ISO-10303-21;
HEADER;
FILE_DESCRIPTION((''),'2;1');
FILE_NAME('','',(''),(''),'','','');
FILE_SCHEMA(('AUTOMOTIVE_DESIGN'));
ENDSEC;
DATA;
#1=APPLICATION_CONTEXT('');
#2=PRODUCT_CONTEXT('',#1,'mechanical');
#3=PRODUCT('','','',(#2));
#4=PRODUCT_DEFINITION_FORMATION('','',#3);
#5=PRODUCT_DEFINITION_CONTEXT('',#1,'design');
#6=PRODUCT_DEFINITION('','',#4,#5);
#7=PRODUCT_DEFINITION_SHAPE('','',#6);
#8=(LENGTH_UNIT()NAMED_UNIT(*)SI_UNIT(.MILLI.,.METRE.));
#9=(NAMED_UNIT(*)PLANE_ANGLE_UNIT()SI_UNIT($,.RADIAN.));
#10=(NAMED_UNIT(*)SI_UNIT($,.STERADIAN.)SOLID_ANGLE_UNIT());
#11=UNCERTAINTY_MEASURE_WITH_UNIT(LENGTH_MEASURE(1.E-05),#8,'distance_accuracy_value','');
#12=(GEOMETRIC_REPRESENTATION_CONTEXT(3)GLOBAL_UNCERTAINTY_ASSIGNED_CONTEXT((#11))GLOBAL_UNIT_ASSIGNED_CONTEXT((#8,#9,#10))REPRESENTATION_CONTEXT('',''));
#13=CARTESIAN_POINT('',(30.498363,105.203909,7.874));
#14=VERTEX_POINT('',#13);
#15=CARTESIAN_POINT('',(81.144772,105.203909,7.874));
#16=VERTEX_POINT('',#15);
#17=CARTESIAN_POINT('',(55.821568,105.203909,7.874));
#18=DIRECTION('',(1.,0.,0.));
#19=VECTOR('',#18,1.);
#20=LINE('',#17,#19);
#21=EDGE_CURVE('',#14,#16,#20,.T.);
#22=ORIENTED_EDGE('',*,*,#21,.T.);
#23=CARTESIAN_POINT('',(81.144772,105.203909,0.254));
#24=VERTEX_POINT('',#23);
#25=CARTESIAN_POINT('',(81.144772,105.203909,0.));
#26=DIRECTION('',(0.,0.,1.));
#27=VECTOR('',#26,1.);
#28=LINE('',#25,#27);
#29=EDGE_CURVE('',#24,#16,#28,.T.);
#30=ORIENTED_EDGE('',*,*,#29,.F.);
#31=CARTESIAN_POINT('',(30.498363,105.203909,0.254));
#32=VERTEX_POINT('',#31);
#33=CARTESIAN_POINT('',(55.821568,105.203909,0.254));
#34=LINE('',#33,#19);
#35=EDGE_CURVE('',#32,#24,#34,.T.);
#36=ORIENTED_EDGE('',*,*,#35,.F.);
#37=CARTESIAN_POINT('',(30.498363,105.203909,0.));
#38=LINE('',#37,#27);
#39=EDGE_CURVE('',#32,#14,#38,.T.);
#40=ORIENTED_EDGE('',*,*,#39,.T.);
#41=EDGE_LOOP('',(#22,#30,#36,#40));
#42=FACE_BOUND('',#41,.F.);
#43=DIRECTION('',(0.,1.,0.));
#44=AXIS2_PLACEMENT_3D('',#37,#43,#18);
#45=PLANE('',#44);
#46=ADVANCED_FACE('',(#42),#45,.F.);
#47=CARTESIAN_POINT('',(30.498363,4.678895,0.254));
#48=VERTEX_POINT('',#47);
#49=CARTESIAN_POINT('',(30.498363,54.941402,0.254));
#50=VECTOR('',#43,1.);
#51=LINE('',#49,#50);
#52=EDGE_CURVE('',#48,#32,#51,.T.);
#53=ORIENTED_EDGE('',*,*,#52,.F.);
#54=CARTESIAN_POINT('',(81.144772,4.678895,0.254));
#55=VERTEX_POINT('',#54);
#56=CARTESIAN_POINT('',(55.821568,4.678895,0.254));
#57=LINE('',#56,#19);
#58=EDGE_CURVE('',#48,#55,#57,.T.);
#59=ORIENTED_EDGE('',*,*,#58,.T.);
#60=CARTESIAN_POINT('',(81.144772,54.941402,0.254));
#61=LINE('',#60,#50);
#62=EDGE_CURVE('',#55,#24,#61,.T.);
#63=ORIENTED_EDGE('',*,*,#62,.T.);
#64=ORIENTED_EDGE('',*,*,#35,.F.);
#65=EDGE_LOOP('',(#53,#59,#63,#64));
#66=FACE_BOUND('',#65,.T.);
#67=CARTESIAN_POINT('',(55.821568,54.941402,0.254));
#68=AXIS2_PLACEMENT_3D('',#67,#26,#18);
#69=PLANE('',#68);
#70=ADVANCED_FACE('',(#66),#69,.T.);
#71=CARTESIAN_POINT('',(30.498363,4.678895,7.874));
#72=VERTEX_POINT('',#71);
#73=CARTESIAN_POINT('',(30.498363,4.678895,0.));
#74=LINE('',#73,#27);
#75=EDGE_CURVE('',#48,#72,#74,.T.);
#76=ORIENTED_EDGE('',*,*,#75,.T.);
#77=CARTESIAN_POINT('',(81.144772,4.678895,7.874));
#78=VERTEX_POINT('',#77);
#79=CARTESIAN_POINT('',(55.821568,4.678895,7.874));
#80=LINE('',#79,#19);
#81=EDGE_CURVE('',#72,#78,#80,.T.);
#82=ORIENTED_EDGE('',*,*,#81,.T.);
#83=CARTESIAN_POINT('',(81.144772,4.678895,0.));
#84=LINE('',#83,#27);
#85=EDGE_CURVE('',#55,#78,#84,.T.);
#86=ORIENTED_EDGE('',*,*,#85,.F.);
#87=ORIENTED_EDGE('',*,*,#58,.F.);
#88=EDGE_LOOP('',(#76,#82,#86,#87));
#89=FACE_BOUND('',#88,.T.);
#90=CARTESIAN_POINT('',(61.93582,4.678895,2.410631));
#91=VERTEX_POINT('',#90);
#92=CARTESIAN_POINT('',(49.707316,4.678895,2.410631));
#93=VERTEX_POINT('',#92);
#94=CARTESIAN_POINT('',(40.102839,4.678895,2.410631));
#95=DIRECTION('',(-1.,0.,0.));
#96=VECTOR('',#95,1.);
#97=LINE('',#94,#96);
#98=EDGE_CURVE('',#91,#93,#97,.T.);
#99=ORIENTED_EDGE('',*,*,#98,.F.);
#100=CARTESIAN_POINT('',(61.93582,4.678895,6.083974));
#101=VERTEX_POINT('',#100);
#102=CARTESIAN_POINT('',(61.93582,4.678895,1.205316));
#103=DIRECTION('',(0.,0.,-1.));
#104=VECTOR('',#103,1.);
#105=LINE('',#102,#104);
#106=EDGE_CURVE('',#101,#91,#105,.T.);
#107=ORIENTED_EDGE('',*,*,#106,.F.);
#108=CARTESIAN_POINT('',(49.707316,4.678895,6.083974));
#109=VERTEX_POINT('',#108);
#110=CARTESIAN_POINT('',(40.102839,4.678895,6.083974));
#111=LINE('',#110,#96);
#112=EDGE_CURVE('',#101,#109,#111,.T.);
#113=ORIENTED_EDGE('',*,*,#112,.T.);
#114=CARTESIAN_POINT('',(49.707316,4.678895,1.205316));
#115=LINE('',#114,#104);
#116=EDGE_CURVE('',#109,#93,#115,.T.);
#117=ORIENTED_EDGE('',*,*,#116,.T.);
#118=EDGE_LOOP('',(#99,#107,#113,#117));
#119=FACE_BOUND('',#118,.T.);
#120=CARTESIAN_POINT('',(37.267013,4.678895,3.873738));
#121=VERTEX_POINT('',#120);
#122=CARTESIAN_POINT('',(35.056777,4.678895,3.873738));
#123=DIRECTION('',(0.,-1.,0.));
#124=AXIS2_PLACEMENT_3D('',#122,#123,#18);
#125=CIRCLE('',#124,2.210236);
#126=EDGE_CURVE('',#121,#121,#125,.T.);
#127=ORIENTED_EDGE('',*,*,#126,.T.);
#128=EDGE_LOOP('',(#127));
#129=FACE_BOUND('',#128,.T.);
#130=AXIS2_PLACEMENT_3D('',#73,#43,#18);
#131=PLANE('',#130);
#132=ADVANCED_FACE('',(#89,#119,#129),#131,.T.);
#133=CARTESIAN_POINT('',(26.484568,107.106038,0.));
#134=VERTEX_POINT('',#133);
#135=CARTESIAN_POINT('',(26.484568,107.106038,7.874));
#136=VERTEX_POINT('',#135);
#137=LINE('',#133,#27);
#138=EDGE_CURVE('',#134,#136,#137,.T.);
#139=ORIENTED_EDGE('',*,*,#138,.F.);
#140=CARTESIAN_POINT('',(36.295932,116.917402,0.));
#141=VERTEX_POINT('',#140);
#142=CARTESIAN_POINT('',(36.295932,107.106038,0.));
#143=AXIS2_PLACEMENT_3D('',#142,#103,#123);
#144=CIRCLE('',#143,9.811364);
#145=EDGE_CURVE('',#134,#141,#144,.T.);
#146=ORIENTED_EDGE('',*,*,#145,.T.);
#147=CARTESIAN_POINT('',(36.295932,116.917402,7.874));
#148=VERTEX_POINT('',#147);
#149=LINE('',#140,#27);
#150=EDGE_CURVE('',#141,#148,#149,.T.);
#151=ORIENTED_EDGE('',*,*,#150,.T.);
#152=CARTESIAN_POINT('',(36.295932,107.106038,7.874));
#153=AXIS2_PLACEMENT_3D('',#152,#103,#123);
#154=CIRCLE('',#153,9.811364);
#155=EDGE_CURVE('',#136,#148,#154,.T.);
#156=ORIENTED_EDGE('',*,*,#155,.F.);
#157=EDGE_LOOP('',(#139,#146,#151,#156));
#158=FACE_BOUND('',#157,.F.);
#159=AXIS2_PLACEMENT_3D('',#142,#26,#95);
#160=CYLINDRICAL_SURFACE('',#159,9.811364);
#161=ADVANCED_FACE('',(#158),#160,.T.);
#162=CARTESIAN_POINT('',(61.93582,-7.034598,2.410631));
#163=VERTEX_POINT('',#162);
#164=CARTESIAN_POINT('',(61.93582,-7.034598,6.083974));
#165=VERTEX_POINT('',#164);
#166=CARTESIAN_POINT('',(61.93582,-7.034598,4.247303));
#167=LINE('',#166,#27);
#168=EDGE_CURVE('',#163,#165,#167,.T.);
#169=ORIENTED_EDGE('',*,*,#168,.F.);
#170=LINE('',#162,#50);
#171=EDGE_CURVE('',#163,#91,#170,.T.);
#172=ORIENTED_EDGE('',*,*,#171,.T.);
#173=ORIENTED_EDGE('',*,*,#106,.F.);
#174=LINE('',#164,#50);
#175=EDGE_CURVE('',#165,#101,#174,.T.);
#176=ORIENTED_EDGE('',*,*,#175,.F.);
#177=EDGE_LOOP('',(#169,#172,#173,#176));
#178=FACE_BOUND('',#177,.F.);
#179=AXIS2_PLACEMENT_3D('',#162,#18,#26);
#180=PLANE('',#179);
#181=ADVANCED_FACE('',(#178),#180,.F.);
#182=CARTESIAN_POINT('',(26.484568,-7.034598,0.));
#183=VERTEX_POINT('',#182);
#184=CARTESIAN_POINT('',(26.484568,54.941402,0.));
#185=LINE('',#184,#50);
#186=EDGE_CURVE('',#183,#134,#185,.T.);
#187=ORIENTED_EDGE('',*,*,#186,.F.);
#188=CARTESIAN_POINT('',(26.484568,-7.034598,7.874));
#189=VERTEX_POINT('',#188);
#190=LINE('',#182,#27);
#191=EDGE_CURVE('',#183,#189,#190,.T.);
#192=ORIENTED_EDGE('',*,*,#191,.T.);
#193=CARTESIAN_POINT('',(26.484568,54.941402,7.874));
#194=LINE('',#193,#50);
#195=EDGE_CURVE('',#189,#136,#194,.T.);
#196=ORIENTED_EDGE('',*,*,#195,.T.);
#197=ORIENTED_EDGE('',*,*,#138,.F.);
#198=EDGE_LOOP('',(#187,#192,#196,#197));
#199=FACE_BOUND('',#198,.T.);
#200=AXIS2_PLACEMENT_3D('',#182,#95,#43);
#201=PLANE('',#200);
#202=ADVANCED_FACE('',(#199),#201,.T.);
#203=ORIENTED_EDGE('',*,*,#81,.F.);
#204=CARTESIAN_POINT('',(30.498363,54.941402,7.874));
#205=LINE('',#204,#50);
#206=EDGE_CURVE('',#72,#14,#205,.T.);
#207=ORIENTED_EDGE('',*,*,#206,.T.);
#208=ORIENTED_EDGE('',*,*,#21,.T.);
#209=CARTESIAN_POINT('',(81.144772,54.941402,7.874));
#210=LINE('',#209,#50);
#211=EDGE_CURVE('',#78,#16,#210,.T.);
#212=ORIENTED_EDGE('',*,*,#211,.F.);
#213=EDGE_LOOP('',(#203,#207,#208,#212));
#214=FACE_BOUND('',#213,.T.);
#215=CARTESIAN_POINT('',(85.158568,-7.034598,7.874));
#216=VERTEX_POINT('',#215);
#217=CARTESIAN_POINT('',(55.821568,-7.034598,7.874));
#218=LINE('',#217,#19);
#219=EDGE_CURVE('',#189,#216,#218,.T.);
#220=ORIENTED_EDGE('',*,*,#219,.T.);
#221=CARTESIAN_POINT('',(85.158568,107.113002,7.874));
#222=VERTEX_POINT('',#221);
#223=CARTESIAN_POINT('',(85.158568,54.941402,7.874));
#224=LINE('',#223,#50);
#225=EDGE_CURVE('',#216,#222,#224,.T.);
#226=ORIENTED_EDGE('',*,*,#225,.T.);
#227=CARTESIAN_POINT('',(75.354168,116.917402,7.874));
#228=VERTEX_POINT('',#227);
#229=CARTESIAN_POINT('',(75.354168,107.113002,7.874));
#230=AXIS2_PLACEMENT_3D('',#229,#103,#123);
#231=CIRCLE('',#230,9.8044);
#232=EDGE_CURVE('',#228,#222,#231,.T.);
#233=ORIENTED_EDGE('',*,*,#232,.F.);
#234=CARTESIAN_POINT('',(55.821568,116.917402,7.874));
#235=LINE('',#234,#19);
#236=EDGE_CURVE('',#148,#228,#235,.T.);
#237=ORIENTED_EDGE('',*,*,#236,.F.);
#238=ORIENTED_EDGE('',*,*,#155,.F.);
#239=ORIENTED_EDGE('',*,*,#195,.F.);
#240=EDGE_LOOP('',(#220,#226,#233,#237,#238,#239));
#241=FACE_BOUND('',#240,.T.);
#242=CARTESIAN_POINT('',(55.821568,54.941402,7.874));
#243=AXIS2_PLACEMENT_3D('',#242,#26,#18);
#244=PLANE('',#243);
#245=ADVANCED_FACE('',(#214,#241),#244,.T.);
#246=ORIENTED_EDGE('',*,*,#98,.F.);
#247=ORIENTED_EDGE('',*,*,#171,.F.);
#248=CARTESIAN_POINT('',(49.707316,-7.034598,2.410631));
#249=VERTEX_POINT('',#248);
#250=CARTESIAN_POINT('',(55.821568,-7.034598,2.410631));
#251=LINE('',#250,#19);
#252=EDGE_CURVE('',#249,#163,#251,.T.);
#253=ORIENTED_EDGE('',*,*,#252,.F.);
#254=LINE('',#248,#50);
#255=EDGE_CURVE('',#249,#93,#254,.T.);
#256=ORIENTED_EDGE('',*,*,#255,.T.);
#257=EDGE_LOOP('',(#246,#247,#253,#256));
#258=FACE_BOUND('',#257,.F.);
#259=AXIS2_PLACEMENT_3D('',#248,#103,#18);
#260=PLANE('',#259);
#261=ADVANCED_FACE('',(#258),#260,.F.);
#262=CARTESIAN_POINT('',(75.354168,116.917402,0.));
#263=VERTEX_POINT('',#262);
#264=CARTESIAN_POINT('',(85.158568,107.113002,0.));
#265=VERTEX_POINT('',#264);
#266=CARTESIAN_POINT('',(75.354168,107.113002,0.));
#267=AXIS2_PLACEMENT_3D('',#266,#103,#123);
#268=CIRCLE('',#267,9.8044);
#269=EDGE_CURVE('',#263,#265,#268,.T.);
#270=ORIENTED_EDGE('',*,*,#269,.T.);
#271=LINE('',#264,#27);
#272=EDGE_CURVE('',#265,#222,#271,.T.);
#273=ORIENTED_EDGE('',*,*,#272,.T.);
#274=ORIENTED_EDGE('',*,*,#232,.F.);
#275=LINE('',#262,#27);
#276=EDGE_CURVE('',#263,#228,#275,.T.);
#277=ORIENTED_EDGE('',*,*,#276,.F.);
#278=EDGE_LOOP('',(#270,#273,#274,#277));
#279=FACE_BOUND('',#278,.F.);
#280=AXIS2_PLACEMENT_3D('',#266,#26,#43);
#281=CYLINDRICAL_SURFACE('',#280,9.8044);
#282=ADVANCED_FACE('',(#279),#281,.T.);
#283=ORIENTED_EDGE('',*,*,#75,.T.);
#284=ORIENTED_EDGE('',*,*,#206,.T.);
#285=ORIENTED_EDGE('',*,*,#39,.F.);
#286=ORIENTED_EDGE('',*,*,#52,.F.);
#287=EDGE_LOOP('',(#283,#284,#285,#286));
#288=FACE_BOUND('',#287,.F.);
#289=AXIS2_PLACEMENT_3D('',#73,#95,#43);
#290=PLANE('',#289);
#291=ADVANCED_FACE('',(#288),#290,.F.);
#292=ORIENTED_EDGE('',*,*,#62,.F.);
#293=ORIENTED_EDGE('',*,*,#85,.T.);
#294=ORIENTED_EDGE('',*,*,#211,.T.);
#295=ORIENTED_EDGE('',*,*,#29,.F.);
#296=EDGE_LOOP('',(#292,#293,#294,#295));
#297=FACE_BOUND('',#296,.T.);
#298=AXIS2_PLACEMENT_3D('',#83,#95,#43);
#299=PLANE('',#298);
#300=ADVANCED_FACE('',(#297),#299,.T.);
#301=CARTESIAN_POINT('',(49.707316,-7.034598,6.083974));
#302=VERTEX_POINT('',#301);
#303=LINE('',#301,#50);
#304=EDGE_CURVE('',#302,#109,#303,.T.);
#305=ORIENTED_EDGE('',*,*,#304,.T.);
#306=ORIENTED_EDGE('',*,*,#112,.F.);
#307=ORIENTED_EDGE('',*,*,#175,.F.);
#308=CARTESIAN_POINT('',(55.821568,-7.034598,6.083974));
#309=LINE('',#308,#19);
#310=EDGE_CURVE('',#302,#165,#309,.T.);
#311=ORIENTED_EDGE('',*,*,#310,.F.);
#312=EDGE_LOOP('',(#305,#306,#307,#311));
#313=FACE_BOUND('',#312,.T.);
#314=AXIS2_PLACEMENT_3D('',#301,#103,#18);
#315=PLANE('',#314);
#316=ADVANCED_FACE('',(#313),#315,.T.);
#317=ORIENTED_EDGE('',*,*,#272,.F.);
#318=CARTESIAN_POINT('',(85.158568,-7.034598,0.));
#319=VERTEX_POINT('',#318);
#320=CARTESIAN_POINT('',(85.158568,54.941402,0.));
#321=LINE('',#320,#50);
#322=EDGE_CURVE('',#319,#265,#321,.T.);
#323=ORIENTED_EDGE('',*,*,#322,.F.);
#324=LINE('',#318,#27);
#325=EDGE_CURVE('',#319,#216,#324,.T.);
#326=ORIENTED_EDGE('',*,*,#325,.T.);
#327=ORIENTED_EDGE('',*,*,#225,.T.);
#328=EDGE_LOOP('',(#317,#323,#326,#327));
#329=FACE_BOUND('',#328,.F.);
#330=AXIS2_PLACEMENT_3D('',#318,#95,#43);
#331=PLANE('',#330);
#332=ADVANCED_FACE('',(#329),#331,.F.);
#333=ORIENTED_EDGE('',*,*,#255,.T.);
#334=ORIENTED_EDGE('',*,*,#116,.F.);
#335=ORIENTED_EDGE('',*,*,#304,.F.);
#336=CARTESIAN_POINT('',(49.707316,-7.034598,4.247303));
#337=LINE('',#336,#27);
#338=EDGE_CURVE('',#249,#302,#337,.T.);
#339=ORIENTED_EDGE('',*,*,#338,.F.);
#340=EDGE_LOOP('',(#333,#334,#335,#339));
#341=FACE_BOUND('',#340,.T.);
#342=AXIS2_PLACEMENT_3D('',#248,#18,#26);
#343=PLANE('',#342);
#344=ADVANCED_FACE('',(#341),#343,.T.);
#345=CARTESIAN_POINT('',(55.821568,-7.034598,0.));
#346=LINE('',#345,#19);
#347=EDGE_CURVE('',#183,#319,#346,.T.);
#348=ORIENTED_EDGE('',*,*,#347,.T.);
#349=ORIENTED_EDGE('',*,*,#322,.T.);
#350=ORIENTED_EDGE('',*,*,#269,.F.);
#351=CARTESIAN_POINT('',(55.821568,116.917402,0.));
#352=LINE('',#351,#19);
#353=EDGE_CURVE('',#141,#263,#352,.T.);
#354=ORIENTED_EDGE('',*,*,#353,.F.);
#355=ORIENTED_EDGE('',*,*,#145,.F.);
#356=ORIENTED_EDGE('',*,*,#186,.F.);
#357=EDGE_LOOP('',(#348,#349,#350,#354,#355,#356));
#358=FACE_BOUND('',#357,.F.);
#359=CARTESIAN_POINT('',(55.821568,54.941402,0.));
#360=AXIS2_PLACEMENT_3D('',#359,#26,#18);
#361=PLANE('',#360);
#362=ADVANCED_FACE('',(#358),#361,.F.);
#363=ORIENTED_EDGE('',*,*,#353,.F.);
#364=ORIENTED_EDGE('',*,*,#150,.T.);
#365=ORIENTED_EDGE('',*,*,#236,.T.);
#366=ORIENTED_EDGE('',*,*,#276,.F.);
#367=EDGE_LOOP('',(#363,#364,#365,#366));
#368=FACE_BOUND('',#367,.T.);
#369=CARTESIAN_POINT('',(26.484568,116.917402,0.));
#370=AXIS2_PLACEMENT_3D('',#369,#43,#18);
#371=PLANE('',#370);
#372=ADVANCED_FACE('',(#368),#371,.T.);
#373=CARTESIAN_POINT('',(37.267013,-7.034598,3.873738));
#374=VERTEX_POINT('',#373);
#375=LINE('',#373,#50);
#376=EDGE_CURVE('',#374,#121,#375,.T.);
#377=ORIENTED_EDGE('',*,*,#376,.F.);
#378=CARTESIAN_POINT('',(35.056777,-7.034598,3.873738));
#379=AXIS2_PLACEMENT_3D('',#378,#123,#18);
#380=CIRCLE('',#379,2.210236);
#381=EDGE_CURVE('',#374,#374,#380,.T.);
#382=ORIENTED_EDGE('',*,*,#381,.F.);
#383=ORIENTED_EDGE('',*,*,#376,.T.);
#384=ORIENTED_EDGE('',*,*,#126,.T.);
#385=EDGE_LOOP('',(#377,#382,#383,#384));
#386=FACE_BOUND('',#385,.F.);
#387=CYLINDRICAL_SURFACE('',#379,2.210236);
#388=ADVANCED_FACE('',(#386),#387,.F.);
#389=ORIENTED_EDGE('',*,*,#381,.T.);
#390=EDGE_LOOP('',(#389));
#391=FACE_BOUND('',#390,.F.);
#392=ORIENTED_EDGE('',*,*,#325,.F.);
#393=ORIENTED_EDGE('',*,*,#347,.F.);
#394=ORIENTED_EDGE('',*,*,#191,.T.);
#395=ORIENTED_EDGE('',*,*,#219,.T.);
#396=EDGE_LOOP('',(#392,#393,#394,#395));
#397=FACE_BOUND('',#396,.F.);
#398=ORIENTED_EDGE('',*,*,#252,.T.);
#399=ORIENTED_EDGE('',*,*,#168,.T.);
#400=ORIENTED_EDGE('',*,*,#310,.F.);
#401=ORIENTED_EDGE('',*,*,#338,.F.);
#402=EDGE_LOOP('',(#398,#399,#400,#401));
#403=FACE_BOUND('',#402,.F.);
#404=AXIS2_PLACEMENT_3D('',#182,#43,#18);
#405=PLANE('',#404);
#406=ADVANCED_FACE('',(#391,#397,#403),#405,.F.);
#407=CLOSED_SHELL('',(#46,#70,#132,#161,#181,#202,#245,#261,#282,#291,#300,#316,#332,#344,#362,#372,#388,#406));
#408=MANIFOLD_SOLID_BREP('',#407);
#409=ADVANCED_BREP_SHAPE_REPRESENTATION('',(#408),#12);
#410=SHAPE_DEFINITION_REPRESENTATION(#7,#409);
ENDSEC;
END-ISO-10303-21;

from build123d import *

# Parameters (mm, degrees)
F0_W     = 50.6464093924
F0_H     = 100.5250141025
F1_DEPTH = 0.254
F0_W_2   = 58.674
F0_H_2   = 123.952
F2_DEPTH = 7.874
F3_R     = 9.8113639175
F4_R     = 9.8044
F6_W     = 12.2285038233
F6_H     = 3.6733425222
F7_DEPTH = 17.272
F8_R     = 2.2102361545
F9_DEPTH = 12.192


# Not quite as in the source:
# - the program builds the solid bodies; features that only make, move or delete a surface that nothing else refers to are left out


with BuildPart() as f1:
    # F0 (on Top) → F1 (new body)
    with BuildSketch(Plane.XY):
        with Locations((55.8215677738, 54.941402014)):
            Rectangle(F0_W, F0_H)
    extrude(amount=F1_DEPTH)

    # F0 (on Top) → F2 (join)
    with BuildSketch(Plane.XY):
        with Locations((55.8215677738, 54.941402014)):
            Rectangle(F0_W_2, F0_H_2)
        with Locations((55.8215677738, 54.941402014)):
            Rectangle(F0_W, F0_H, mode=Mode.SUBTRACT)
    extrude(amount=F2_DEPTH)

    # F3
    f3_edges = [f1.edges().sort_by_distance(p)[0] for p in [
        (26.484568, 116.917402, 3.937),
    ]]
    fillet(f3_edges, radius=F3_R)

    # F4
    f4_edges = [f1.edges().sort_by_distance(p)[0] for p in [
        (85.158568, 116.917402, 3.937),
    ]]
    fillet(f4_edges, radius=F4_R)

    # F6 (on face) → F7 (cut)
    with BuildSketch(Plane.XZ.offset(7.034597986)):
        with Locations((55.8215677738, 4.2473026551)):
            Rectangle(F6_W, F6_H)
    extrude(amount=-F7_DEPTH, mode=Mode.SUBTRACT)

    # F8 (on face) → F9 (cut)
    with BuildSketch(Plane.XZ.offset(7.034597986)):
        with Locations((35.0567772985, 3.8737377618)):
            Circle(F8_R)
    extrude(amount=-F9_DEPTH, mode=Mode.SUBTRACT)


solid = f1.part
